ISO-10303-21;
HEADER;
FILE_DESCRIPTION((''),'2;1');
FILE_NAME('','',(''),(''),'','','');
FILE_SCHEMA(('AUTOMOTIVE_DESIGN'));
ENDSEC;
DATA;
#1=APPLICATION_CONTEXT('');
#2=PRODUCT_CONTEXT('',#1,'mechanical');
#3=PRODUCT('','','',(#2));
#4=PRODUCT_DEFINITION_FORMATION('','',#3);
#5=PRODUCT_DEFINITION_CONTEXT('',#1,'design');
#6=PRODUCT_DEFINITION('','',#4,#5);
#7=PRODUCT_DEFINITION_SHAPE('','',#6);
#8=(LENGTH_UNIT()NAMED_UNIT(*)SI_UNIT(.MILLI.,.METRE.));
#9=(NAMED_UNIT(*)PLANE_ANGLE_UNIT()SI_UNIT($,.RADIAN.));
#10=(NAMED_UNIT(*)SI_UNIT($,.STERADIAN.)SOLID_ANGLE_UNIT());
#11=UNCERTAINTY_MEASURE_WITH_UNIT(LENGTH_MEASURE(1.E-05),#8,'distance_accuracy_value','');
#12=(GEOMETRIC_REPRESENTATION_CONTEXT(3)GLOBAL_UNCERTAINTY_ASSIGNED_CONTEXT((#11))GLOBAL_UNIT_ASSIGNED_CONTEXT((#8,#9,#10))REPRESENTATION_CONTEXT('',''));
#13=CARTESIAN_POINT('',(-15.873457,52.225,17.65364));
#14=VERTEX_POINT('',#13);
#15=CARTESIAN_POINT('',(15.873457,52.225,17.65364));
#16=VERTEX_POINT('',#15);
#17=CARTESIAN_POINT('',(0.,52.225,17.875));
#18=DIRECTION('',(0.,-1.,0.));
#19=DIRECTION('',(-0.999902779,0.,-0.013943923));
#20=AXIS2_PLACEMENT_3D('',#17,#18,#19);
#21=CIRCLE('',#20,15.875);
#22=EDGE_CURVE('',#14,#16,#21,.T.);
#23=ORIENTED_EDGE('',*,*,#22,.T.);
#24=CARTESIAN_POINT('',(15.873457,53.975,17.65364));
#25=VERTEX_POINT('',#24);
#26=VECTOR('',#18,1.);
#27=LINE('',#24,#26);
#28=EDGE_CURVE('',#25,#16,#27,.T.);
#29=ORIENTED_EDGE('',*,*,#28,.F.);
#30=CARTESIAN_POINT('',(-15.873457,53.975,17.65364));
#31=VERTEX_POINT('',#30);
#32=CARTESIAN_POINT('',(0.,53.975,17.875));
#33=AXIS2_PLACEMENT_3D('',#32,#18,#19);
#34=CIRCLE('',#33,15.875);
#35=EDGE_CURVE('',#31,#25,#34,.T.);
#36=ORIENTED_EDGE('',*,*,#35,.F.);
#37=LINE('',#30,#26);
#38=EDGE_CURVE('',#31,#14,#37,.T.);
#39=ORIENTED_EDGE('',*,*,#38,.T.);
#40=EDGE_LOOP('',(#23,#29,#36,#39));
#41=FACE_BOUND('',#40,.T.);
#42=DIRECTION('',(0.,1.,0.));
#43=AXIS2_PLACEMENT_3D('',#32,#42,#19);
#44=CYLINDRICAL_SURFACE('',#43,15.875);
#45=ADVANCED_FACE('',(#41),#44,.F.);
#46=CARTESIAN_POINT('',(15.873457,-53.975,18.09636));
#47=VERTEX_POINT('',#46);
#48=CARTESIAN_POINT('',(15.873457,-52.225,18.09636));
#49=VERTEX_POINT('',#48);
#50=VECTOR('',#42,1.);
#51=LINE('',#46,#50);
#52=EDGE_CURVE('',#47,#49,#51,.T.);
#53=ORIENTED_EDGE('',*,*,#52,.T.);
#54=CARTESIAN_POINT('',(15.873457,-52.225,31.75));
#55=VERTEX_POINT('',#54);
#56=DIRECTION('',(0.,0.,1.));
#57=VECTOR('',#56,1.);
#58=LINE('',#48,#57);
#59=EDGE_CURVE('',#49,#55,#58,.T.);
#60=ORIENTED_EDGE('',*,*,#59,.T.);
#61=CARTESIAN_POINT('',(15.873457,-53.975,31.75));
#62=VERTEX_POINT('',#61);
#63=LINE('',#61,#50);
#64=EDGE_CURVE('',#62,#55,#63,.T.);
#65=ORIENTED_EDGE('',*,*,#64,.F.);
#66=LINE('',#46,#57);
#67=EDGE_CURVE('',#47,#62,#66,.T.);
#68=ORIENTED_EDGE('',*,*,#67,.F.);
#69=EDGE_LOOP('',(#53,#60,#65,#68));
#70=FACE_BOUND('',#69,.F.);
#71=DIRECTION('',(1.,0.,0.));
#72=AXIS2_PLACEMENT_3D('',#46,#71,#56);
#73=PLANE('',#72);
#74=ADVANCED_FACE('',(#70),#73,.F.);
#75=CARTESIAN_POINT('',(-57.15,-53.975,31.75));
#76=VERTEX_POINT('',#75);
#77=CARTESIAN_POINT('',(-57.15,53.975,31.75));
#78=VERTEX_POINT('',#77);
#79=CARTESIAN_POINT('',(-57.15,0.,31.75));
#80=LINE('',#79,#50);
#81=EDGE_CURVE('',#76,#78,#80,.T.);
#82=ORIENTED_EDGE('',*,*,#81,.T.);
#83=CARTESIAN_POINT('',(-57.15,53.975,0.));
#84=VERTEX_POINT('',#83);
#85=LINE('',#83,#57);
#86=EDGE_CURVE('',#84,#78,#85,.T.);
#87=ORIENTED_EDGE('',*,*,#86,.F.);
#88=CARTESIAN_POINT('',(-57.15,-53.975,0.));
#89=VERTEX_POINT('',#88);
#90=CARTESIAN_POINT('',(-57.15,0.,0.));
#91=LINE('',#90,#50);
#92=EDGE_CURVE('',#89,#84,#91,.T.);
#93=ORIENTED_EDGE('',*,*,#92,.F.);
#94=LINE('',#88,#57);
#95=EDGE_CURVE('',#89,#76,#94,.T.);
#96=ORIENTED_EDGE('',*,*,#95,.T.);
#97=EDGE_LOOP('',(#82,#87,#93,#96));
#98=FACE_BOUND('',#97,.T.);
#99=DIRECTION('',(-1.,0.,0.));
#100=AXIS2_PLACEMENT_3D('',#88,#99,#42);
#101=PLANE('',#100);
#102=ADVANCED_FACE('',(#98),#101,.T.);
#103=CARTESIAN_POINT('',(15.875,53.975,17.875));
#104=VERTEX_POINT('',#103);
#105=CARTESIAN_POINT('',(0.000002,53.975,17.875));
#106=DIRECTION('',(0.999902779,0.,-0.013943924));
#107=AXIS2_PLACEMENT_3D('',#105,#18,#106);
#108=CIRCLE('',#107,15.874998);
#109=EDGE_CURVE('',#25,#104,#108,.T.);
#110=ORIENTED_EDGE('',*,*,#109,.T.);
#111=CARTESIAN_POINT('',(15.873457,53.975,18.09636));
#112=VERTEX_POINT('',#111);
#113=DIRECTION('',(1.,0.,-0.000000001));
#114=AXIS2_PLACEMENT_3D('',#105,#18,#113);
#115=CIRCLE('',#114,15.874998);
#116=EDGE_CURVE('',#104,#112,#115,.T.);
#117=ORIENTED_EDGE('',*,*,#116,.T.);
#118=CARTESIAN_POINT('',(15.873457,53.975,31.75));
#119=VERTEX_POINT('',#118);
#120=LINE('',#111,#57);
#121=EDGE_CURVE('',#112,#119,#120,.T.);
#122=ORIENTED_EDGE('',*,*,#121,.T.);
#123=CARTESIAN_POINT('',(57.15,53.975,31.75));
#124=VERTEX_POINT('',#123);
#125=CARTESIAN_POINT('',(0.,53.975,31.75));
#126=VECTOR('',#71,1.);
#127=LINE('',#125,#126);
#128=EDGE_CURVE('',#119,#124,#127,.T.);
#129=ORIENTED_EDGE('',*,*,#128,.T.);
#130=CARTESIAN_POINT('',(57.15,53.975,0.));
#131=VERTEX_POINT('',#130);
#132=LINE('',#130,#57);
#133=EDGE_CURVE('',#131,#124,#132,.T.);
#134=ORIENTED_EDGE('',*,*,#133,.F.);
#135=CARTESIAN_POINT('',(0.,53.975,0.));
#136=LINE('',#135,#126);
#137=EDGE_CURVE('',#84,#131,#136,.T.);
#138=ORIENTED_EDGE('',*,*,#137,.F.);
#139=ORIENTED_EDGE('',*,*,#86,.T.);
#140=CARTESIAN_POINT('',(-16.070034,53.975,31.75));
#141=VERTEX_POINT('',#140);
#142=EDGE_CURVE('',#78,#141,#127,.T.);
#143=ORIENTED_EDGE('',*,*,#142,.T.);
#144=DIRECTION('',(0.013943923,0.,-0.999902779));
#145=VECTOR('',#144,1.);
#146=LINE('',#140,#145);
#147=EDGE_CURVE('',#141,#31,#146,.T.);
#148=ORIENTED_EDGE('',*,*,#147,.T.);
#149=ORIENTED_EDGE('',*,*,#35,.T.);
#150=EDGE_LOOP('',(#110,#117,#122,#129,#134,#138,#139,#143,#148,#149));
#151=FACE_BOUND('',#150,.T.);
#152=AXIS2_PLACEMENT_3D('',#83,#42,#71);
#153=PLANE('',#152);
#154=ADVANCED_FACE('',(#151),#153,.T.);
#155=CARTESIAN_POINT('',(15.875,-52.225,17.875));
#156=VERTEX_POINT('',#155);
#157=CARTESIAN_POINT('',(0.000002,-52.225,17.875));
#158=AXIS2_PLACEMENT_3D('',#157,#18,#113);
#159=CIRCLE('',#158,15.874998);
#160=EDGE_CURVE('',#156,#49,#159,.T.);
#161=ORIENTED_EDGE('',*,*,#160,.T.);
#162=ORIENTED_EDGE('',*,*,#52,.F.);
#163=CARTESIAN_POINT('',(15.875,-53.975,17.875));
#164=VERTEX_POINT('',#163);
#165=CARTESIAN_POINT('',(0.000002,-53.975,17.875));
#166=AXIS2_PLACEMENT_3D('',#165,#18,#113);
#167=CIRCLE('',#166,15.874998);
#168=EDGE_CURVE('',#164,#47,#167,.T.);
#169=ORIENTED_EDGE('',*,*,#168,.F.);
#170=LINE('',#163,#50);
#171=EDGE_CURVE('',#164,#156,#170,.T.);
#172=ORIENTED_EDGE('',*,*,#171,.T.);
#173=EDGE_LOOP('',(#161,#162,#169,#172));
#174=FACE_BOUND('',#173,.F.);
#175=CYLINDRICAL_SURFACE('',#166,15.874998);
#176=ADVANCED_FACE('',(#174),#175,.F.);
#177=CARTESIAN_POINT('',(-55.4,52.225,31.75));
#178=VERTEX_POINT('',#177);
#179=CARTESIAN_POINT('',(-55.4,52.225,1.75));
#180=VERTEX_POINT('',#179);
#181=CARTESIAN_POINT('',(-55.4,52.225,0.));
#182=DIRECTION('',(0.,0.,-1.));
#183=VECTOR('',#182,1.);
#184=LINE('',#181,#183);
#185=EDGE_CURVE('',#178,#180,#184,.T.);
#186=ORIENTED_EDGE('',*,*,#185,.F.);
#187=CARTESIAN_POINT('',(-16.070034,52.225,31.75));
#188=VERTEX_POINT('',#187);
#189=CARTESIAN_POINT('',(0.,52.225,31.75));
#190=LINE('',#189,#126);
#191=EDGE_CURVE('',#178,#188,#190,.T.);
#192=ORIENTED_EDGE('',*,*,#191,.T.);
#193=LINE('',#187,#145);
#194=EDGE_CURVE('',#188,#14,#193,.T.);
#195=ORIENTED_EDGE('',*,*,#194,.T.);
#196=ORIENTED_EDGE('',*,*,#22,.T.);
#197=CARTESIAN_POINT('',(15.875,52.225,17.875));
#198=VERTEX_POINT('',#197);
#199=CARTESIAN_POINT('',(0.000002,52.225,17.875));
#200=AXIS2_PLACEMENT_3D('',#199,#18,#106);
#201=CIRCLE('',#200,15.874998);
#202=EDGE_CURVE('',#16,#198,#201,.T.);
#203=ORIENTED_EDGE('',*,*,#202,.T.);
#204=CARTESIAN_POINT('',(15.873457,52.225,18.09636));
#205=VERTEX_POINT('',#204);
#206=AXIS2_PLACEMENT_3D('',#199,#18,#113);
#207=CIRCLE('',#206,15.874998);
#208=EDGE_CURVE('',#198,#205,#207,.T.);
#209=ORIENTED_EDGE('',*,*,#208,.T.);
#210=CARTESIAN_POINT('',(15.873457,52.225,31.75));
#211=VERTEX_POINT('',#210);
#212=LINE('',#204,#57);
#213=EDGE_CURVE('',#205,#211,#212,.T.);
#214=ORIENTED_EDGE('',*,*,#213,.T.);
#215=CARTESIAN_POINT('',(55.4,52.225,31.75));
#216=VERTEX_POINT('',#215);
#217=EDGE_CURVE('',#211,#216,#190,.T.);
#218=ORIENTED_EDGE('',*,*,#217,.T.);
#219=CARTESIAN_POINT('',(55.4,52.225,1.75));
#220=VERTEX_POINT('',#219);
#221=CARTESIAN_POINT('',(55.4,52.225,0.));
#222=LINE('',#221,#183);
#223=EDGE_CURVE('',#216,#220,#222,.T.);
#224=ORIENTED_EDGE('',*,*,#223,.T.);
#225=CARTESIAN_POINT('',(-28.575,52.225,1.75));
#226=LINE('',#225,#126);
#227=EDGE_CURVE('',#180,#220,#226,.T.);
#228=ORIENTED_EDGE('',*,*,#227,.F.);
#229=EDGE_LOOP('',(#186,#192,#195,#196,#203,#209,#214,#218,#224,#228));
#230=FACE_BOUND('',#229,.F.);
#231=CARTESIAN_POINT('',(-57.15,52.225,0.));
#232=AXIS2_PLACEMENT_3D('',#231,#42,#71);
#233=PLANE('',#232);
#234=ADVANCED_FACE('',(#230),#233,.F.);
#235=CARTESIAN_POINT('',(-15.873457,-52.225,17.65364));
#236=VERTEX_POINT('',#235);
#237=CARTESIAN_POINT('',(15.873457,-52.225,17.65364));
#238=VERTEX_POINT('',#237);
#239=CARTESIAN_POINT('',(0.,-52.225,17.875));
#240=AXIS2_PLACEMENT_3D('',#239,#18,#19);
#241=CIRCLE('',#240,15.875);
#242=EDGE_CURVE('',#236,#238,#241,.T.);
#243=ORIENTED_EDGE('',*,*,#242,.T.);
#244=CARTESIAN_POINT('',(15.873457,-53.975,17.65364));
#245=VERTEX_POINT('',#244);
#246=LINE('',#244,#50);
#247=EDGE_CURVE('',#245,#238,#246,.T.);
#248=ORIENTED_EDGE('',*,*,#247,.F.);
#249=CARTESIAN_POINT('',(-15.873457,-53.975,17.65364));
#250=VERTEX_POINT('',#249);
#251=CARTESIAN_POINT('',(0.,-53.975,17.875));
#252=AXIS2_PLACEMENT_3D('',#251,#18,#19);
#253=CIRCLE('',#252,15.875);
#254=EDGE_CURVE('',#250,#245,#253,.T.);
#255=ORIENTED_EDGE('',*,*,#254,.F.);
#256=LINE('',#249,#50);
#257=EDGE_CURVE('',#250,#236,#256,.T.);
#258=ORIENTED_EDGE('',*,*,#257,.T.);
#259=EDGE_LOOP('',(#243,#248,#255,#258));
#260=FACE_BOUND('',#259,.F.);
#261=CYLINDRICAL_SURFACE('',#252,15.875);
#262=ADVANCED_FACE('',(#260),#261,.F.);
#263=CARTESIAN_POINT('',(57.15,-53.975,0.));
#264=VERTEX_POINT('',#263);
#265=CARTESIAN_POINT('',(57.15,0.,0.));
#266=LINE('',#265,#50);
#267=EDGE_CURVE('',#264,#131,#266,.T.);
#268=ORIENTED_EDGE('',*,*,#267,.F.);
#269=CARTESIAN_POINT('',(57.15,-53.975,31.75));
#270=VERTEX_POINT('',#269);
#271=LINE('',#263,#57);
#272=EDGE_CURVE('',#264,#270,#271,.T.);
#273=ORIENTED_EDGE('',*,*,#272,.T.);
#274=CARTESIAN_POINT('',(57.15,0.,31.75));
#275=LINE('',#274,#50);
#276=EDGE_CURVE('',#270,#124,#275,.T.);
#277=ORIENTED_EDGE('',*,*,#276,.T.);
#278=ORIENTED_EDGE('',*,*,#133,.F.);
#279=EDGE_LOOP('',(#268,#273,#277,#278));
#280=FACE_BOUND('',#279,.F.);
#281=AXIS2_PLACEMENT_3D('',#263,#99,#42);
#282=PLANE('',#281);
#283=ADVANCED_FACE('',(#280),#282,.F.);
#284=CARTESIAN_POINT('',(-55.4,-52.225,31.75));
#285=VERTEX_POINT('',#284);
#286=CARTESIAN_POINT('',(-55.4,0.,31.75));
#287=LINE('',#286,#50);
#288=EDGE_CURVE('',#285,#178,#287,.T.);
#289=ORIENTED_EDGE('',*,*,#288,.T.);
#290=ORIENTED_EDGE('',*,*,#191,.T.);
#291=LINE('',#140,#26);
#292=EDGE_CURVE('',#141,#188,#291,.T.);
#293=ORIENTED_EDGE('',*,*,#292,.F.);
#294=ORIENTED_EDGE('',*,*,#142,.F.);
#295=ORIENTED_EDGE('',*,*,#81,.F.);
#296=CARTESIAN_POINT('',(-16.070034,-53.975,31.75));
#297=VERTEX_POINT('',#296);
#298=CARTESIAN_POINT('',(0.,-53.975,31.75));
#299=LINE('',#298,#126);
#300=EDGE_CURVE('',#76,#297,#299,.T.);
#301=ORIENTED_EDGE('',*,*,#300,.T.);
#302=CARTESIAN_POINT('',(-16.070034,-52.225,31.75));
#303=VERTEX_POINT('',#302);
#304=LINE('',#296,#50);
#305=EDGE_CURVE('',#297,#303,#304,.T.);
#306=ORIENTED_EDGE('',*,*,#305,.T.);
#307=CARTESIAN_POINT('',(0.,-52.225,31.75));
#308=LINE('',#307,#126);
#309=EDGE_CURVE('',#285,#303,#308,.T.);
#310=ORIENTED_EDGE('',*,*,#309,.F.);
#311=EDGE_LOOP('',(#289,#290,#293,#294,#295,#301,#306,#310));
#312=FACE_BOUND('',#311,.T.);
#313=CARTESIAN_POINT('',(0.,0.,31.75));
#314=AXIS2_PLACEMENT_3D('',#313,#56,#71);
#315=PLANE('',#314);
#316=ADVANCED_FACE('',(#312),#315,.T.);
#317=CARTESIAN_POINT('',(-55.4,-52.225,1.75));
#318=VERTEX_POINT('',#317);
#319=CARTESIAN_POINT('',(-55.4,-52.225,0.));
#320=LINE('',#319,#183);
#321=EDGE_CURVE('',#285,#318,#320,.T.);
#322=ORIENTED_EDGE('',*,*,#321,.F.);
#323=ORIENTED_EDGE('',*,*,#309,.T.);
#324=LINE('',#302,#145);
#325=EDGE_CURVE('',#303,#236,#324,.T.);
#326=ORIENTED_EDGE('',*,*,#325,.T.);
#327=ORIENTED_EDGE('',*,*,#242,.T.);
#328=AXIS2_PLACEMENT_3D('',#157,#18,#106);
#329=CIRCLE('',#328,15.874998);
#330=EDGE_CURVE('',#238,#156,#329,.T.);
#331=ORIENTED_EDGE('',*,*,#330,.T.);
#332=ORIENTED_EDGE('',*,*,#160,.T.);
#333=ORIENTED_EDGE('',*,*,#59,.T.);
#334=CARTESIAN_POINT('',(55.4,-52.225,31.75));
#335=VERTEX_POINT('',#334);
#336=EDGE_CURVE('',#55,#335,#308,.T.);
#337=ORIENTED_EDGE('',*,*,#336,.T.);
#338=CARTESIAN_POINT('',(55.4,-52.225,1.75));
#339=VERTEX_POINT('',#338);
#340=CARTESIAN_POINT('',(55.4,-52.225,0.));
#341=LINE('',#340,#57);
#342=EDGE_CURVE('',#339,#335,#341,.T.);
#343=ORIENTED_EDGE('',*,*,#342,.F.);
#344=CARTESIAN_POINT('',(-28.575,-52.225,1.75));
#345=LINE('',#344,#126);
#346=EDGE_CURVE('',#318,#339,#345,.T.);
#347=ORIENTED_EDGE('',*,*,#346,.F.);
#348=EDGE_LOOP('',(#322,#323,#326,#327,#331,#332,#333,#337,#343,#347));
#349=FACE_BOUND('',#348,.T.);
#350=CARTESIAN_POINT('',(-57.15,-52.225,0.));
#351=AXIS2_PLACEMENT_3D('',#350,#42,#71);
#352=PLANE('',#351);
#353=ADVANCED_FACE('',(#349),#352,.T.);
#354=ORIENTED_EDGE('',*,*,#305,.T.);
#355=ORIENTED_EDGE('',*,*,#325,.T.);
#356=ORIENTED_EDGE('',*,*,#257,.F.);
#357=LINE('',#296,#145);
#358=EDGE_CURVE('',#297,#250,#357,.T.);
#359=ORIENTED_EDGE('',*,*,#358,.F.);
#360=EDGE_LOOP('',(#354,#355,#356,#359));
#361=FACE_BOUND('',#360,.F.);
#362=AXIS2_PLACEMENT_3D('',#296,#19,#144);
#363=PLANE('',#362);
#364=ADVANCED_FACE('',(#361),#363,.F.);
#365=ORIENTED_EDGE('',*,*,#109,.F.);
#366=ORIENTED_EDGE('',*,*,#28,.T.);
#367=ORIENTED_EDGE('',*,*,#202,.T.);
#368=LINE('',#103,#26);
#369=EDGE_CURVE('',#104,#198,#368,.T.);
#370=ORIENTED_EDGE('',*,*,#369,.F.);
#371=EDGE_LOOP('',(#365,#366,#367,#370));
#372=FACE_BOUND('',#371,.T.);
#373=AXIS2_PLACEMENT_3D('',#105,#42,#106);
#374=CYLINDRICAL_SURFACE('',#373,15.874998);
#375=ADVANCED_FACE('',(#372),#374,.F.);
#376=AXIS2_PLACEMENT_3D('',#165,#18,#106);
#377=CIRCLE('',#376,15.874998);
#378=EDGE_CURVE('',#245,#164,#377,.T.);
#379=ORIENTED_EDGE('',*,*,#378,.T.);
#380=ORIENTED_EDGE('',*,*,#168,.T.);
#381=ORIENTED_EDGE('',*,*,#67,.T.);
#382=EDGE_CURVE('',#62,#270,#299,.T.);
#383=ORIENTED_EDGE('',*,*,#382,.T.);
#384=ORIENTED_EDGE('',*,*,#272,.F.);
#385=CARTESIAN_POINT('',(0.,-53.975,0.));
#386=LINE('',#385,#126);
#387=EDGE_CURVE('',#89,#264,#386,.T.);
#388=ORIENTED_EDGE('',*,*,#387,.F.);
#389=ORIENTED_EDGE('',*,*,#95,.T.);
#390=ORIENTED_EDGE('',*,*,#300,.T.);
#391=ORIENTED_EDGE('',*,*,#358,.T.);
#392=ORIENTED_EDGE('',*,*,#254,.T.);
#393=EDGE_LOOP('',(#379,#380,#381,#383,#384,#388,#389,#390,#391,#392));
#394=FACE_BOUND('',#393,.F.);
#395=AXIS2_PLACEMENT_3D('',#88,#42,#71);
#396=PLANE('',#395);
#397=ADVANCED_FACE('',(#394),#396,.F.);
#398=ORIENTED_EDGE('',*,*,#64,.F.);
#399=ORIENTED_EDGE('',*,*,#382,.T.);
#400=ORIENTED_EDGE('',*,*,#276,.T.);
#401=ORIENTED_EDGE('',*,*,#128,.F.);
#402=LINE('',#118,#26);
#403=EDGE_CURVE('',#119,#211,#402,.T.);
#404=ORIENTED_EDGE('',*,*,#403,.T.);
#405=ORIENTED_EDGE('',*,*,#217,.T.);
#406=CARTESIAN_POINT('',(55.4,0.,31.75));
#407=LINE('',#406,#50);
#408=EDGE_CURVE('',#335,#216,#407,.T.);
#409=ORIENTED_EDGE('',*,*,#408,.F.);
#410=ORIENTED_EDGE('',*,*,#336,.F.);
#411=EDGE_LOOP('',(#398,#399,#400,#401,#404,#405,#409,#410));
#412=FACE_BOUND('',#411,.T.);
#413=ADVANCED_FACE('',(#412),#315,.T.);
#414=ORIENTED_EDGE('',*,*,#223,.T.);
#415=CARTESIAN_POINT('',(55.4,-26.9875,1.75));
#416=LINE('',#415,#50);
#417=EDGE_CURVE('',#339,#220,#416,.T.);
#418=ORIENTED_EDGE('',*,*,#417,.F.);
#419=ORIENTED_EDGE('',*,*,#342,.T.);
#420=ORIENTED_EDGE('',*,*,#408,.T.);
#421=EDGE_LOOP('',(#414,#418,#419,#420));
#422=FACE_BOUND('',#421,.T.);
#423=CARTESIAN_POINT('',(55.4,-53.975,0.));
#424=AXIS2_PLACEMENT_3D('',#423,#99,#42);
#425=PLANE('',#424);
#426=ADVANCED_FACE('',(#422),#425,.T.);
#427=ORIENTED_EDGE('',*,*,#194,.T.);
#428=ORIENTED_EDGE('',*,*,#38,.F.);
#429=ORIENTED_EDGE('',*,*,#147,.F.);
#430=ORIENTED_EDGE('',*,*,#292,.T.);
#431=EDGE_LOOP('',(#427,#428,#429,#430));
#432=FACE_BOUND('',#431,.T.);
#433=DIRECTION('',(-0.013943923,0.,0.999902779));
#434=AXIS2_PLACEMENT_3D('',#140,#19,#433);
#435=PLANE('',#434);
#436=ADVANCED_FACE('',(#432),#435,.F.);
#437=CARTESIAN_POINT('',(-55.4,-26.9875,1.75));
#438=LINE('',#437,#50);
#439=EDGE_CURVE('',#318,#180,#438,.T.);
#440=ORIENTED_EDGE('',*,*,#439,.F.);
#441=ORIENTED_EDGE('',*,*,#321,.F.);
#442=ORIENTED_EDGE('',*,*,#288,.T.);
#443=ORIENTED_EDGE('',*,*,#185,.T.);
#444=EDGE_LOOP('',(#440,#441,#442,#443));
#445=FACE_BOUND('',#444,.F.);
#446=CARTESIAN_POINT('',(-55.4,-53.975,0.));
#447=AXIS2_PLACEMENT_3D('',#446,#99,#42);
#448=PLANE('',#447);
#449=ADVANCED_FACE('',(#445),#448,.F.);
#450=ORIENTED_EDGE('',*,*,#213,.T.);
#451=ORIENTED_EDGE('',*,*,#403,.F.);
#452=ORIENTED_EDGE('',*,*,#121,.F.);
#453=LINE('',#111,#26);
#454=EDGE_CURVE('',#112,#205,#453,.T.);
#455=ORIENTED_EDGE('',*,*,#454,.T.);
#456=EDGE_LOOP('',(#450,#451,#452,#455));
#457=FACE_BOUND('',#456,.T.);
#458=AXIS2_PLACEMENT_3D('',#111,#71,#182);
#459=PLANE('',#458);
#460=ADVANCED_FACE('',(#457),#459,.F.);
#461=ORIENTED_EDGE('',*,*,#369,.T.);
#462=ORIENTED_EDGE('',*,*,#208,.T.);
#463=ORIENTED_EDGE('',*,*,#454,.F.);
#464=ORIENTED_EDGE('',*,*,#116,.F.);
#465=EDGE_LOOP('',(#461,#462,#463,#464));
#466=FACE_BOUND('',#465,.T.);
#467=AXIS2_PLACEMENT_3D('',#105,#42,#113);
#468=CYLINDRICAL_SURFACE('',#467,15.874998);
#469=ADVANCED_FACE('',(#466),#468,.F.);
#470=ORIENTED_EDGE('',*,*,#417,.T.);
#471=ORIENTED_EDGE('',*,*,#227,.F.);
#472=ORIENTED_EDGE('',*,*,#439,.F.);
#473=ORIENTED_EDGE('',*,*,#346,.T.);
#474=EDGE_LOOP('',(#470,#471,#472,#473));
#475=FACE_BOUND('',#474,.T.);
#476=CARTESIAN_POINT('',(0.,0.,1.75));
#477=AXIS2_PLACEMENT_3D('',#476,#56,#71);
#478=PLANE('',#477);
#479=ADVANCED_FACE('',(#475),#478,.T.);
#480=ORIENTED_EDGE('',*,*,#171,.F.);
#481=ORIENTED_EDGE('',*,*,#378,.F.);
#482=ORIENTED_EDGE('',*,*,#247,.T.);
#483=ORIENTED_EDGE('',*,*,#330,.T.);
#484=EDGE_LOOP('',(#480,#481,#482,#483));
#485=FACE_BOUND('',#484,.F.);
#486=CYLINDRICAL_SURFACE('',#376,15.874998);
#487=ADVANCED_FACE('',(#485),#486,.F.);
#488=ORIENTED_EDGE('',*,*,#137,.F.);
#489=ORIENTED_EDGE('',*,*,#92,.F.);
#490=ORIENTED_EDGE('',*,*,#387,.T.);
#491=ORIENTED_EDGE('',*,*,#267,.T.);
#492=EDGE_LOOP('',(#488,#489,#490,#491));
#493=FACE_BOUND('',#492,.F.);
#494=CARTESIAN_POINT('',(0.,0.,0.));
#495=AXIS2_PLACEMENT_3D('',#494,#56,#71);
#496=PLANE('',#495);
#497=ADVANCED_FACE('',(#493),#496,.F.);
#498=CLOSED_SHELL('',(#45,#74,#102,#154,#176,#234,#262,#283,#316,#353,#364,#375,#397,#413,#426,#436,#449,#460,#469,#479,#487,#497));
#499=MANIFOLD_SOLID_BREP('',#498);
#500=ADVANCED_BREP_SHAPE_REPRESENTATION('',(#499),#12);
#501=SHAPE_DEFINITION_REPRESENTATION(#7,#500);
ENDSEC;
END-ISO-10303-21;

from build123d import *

# Parameters (mm, degrees)
F0_W     = 114.3
F0_H     = 107.95
F1_DEPTH = 31.75
F3_T     = -1.75
F4_DEPTH = 1.75


# Not quite as in the source:
# - a pattern or mirror of a feature is missing from the dataset's text; its kind, count and spacing are read off the source's solid


with BuildPart() as f1:
    # F0 (on Top) → F1 (new body)
    with BuildSketch(Plane.XY):
        Rectangle(F0_W, F0_H)
    extrude(amount=F1_DEPTH)

    # F3
    f3_openings = [f1.faces().sort_by_distance(p)[0] for p in [
        (0, 0, 31.75),
    ]]
    offset(amount=F3_T, openings=f3_openings)

    # F2 (on face) → F4 (cut)
    with BuildSketch(Plane.XZ.offset(53.975)):
        with BuildLine():
            ThreePointArc((-7.7136243103, 31.75), (-13.7391570489, 25.8280615857), (-15.873456613, 17.6536402154))
            ThreePointArc((-15.873456613, 17.6536402154), (0, 2), (15.873456613, 17.6536402154))
            Line((15.873456613, 17.6536402154), (15.873456613, 18.0963597846))
            ThreePointArc((15.873456613, 18.0963597846), (13.6269244294, 26.0188661333), (7.7136243103, 31.75))
            Line((7.7136243103, 31.75), (-7.7136243103, 31.75))
        make_face()
        with BuildLine():
            Line((-16.0700342862, 31.75), (-15.873456613, 17.6536402154))
            ThreePointArc((-15.873456613, 17.6536402154), (-13.7391570489, 25.8280615857), (-7.7136243103, 31.75))
            Line((-7.7136243103, 31.75), (-16.0700342862, 31.75))
        make_face()
        with BuildLine():
            Line((15.873456613, 18.0963597846), (15.873456613, 17.6536402154))
            ThreePointArc((15.873456613, 17.6536402154), (15.8746141486, 17.7643174175), (15.875, 17.875))
            ThreePointArc((15.875, 17.875), (15.8746141486, 17.9856825825), (15.873456613, 18.0963597846))
        make_face()
        with BuildLine():
            ThreePointArc((7.7136243103, 31.75), (0, 33.75), (-7.7136243103, 31.75))
            Line((-7.7136243103, 31.75), (7.7136243103, 31.75))
        make_face()
        with BuildLine():
            ThreePointArc((7.7136243103, 31.75), (13.6269244294, 26.0188661333), (15.873456613, 18.0963597846))
            Line((15.873456613, 18.0963597846), (15.873456613, 31.75))
            Line((15.873456613, 31.75), (7.7136243103, 31.75))
        make_face()
    f4 = extrude(amount=-F4_DEPTH, mode=Mode.SUBTRACT)

    # F4_copies: F4 across plane
    add(f4.mirror(Plane.ZX), mode=Mode.SUBTRACT)


solid = f1.part
